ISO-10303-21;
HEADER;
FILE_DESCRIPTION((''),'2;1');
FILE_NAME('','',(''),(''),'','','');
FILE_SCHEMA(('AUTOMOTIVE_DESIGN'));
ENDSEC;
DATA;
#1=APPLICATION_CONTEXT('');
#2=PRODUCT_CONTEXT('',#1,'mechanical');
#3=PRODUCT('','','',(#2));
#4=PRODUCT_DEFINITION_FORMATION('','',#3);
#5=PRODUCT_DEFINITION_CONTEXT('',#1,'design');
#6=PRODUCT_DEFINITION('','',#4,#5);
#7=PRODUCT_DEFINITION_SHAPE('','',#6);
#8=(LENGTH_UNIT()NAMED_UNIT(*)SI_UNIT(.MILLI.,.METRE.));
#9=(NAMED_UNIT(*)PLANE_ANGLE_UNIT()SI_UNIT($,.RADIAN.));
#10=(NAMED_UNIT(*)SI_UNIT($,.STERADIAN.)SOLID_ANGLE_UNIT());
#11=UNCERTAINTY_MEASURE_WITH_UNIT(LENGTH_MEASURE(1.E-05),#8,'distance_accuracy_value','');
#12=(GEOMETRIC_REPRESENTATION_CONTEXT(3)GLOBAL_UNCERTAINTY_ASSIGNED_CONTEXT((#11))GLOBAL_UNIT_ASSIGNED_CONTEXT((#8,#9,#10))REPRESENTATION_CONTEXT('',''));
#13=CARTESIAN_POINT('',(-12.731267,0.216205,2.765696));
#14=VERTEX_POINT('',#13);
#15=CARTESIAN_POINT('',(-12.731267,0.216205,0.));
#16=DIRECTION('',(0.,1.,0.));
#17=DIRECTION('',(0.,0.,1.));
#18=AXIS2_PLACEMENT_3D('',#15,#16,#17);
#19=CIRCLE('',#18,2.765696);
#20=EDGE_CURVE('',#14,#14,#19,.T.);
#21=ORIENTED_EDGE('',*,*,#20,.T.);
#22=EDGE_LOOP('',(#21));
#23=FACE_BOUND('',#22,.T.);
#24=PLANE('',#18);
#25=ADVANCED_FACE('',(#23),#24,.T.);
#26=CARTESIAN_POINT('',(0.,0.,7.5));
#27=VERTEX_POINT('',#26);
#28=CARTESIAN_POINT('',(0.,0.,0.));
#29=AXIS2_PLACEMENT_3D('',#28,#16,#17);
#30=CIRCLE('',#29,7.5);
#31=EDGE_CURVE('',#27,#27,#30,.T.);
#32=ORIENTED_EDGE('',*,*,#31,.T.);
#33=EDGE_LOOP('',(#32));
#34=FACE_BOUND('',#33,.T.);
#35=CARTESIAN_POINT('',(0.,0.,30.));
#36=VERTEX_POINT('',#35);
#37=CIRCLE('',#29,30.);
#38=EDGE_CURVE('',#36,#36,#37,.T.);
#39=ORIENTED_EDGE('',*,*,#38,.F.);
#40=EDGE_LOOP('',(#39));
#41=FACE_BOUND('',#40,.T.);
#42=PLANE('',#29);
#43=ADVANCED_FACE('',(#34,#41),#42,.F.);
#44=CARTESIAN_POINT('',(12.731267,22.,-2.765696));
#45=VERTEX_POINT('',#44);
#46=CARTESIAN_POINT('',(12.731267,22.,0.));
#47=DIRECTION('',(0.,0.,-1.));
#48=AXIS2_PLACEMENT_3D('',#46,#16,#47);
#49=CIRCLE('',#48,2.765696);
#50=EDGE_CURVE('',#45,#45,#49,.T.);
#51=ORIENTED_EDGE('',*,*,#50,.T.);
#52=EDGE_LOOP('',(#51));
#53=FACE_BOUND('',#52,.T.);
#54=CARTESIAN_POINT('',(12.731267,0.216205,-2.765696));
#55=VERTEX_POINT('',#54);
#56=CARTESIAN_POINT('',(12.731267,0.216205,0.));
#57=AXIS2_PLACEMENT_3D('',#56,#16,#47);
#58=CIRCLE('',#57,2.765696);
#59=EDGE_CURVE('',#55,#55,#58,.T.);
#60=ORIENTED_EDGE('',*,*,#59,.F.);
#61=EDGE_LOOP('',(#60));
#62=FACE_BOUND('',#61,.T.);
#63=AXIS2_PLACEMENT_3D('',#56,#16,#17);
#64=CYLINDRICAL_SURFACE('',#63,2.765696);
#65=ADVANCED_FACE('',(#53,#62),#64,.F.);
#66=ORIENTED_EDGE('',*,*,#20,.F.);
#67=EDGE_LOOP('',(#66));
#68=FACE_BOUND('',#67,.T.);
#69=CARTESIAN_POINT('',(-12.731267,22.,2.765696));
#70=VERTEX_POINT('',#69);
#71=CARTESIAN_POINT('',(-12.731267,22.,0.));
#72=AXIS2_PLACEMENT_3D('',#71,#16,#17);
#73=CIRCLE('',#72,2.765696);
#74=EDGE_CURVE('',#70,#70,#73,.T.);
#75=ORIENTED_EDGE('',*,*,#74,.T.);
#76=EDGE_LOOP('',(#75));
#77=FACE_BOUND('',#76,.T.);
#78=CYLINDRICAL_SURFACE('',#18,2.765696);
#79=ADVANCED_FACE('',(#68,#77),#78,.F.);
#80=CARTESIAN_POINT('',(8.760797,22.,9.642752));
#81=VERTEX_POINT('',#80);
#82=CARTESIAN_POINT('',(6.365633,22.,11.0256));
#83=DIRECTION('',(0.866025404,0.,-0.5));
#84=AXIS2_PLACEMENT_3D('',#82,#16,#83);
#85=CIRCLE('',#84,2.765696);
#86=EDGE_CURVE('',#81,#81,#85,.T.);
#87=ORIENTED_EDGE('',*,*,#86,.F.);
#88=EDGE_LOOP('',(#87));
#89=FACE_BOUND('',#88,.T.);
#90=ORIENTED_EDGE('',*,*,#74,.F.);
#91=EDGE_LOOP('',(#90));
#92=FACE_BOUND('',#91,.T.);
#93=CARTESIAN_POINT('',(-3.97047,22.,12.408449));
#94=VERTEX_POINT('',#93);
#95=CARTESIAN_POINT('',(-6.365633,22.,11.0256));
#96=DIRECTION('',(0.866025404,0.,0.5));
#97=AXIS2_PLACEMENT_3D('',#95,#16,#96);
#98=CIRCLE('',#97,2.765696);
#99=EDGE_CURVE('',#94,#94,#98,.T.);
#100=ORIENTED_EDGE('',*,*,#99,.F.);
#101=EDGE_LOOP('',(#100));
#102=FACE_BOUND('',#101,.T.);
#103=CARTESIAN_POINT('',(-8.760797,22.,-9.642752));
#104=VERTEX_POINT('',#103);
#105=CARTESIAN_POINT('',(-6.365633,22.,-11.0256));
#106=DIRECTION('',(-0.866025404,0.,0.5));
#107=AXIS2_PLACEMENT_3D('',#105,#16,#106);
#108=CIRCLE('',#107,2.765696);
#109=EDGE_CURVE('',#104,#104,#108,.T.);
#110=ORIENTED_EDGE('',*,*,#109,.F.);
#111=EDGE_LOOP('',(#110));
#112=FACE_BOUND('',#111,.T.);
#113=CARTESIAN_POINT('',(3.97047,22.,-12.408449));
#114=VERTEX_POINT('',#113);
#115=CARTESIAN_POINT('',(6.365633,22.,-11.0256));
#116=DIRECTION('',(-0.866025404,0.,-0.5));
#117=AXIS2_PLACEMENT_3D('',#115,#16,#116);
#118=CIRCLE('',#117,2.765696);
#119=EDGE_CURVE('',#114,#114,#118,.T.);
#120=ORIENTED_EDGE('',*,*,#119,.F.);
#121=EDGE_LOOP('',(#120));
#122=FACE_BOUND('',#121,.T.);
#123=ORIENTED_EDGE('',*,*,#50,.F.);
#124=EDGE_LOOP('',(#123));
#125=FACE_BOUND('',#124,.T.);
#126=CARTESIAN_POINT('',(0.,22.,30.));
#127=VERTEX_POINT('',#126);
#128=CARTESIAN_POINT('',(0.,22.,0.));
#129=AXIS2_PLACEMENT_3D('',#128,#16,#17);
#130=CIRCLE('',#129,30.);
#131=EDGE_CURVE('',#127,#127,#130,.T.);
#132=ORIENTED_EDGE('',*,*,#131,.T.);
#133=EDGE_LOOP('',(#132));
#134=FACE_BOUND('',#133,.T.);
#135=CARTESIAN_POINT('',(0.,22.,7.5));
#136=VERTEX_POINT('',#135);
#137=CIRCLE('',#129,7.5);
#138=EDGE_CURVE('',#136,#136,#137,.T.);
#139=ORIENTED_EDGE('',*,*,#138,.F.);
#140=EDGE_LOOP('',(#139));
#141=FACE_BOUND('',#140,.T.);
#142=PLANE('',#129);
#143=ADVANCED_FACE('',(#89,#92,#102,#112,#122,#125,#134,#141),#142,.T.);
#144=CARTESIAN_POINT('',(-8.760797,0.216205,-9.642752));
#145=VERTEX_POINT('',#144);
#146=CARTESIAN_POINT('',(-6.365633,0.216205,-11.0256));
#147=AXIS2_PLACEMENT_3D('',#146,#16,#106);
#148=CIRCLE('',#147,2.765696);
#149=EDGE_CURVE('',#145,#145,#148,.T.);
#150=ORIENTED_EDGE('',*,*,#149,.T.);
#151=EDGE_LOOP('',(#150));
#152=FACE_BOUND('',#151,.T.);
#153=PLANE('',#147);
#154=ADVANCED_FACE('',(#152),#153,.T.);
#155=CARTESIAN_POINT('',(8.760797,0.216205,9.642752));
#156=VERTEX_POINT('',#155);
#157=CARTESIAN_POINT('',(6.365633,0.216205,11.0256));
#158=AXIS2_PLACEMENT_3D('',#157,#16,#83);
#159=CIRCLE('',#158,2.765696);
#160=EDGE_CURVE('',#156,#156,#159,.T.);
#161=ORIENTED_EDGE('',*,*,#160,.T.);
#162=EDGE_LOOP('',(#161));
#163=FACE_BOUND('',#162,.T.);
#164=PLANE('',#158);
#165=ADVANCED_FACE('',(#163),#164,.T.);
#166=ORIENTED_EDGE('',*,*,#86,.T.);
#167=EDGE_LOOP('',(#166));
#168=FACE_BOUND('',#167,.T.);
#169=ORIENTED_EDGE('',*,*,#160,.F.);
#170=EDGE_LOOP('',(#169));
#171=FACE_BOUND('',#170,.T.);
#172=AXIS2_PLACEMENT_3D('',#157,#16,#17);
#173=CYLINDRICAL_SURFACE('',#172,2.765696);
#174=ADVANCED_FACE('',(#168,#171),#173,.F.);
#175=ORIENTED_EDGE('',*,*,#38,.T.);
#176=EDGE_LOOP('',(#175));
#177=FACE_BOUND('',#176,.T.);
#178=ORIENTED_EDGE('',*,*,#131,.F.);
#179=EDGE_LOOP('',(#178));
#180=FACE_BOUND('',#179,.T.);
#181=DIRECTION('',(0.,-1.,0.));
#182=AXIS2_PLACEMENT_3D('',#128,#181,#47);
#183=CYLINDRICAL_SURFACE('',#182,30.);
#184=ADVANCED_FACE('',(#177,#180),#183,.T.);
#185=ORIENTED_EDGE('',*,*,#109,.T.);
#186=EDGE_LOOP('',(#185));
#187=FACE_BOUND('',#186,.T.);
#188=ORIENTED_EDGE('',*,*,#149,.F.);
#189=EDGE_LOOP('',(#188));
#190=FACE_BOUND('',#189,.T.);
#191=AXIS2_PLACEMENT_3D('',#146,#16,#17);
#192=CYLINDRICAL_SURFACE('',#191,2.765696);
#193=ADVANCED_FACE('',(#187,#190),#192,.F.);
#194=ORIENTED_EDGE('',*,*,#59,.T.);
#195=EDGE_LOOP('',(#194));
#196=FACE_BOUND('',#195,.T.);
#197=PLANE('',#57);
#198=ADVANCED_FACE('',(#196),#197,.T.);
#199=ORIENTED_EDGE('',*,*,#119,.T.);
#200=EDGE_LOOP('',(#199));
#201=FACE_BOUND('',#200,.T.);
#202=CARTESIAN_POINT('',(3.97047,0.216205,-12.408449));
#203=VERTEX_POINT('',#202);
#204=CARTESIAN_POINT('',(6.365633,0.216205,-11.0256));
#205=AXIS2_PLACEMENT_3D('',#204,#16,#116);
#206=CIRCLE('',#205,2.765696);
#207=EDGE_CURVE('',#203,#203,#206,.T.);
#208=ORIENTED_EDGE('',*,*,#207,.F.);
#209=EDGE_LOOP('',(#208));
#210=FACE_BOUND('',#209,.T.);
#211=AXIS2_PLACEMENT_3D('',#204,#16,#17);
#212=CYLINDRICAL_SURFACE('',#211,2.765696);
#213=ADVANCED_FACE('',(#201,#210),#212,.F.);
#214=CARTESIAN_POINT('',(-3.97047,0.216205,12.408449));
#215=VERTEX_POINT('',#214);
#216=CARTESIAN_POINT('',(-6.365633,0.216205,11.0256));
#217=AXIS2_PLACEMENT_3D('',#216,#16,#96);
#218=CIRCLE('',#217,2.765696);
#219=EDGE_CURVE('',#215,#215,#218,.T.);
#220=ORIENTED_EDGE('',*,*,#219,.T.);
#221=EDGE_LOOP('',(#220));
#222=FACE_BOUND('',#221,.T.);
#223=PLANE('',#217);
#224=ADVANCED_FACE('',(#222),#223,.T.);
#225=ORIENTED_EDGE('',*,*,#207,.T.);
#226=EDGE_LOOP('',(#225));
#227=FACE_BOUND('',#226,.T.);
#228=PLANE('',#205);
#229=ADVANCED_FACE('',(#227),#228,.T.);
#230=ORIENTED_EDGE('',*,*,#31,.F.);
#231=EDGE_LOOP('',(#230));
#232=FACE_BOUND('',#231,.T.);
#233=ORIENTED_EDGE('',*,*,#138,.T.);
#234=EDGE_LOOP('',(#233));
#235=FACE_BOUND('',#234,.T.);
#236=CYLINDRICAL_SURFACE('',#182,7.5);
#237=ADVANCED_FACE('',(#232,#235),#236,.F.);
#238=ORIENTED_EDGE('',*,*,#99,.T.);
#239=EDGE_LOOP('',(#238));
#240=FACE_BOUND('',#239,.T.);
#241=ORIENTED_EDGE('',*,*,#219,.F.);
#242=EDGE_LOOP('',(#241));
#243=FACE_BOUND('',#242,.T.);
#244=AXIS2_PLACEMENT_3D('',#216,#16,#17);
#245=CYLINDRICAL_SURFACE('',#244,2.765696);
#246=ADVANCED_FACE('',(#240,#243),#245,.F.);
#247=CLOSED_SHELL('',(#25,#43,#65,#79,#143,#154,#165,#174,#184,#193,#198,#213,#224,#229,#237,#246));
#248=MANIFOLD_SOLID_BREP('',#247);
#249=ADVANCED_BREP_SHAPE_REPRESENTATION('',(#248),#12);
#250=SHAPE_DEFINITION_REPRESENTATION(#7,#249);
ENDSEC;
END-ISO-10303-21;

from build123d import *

# Parameters (mm, degrees)
SKETCH1_R           = 30
BOSS_EXTRUDE1_DEPTH = 22
SKETCH2_R           = 7.5
CUT_EXTRUDE1_DEPTH  = 48.791212581
SKETCH3_R           = 2.765696192
CUT_EXTRUDE2_DEPTH  = 21.783794888
CIRPATTERN1_COUNT   = 6


with BuildPart() as part:
    # Sketch1 → Boss-Extrude1 (new body)
    with BuildSketch(Plane(origin=(0, 0, 0), x_dir=(1, 0, 0), z_dir=(0, 1, 0))):
        Circle(SKETCH1_R)
    extrude(amount=BOSS_EXTRUDE1_DEPTH)

    # Sketch2 → Cut-Extrude1 (cut, through all)
    with BuildSketch(Plane(origin=(0, 0, 0), x_dir=(1, 0, 0), z_dir=(0, 1, 0))):
        Circle(SKETCH2_R)
    extrude(amount=CUT_EXTRUDE1_DEPTH, mode=Mode.SUBTRACT)

    # Sketch3 → Cut-Extrude2 (cut)
    with BuildSketch(Plane(origin=(0, 22, 0), x_dir=(1, 0, 0), z_dir=(0, 1, 0))):
        with Locations((-12.731266819, 0)):
            Circle(SKETCH3_R)
    cut_extrude2 = extrude(amount=-CUT_EXTRUDE2_DEPTH, mode=Mode.SUBTRACT)

    # CirPattern1: Cut-Extrude2 ×6 about axis
    cirpattern1_axis = Axis((0, 0, 0), (0, 1, 0))
    for i in range(1, CIRPATTERN1_COUNT):
        add(cut_extrude2.rotate(cirpattern1_axis, i * 360 / CIRPATTERN1_COUNT), mode=Mode.SUBTRACT)


solid = part.part
